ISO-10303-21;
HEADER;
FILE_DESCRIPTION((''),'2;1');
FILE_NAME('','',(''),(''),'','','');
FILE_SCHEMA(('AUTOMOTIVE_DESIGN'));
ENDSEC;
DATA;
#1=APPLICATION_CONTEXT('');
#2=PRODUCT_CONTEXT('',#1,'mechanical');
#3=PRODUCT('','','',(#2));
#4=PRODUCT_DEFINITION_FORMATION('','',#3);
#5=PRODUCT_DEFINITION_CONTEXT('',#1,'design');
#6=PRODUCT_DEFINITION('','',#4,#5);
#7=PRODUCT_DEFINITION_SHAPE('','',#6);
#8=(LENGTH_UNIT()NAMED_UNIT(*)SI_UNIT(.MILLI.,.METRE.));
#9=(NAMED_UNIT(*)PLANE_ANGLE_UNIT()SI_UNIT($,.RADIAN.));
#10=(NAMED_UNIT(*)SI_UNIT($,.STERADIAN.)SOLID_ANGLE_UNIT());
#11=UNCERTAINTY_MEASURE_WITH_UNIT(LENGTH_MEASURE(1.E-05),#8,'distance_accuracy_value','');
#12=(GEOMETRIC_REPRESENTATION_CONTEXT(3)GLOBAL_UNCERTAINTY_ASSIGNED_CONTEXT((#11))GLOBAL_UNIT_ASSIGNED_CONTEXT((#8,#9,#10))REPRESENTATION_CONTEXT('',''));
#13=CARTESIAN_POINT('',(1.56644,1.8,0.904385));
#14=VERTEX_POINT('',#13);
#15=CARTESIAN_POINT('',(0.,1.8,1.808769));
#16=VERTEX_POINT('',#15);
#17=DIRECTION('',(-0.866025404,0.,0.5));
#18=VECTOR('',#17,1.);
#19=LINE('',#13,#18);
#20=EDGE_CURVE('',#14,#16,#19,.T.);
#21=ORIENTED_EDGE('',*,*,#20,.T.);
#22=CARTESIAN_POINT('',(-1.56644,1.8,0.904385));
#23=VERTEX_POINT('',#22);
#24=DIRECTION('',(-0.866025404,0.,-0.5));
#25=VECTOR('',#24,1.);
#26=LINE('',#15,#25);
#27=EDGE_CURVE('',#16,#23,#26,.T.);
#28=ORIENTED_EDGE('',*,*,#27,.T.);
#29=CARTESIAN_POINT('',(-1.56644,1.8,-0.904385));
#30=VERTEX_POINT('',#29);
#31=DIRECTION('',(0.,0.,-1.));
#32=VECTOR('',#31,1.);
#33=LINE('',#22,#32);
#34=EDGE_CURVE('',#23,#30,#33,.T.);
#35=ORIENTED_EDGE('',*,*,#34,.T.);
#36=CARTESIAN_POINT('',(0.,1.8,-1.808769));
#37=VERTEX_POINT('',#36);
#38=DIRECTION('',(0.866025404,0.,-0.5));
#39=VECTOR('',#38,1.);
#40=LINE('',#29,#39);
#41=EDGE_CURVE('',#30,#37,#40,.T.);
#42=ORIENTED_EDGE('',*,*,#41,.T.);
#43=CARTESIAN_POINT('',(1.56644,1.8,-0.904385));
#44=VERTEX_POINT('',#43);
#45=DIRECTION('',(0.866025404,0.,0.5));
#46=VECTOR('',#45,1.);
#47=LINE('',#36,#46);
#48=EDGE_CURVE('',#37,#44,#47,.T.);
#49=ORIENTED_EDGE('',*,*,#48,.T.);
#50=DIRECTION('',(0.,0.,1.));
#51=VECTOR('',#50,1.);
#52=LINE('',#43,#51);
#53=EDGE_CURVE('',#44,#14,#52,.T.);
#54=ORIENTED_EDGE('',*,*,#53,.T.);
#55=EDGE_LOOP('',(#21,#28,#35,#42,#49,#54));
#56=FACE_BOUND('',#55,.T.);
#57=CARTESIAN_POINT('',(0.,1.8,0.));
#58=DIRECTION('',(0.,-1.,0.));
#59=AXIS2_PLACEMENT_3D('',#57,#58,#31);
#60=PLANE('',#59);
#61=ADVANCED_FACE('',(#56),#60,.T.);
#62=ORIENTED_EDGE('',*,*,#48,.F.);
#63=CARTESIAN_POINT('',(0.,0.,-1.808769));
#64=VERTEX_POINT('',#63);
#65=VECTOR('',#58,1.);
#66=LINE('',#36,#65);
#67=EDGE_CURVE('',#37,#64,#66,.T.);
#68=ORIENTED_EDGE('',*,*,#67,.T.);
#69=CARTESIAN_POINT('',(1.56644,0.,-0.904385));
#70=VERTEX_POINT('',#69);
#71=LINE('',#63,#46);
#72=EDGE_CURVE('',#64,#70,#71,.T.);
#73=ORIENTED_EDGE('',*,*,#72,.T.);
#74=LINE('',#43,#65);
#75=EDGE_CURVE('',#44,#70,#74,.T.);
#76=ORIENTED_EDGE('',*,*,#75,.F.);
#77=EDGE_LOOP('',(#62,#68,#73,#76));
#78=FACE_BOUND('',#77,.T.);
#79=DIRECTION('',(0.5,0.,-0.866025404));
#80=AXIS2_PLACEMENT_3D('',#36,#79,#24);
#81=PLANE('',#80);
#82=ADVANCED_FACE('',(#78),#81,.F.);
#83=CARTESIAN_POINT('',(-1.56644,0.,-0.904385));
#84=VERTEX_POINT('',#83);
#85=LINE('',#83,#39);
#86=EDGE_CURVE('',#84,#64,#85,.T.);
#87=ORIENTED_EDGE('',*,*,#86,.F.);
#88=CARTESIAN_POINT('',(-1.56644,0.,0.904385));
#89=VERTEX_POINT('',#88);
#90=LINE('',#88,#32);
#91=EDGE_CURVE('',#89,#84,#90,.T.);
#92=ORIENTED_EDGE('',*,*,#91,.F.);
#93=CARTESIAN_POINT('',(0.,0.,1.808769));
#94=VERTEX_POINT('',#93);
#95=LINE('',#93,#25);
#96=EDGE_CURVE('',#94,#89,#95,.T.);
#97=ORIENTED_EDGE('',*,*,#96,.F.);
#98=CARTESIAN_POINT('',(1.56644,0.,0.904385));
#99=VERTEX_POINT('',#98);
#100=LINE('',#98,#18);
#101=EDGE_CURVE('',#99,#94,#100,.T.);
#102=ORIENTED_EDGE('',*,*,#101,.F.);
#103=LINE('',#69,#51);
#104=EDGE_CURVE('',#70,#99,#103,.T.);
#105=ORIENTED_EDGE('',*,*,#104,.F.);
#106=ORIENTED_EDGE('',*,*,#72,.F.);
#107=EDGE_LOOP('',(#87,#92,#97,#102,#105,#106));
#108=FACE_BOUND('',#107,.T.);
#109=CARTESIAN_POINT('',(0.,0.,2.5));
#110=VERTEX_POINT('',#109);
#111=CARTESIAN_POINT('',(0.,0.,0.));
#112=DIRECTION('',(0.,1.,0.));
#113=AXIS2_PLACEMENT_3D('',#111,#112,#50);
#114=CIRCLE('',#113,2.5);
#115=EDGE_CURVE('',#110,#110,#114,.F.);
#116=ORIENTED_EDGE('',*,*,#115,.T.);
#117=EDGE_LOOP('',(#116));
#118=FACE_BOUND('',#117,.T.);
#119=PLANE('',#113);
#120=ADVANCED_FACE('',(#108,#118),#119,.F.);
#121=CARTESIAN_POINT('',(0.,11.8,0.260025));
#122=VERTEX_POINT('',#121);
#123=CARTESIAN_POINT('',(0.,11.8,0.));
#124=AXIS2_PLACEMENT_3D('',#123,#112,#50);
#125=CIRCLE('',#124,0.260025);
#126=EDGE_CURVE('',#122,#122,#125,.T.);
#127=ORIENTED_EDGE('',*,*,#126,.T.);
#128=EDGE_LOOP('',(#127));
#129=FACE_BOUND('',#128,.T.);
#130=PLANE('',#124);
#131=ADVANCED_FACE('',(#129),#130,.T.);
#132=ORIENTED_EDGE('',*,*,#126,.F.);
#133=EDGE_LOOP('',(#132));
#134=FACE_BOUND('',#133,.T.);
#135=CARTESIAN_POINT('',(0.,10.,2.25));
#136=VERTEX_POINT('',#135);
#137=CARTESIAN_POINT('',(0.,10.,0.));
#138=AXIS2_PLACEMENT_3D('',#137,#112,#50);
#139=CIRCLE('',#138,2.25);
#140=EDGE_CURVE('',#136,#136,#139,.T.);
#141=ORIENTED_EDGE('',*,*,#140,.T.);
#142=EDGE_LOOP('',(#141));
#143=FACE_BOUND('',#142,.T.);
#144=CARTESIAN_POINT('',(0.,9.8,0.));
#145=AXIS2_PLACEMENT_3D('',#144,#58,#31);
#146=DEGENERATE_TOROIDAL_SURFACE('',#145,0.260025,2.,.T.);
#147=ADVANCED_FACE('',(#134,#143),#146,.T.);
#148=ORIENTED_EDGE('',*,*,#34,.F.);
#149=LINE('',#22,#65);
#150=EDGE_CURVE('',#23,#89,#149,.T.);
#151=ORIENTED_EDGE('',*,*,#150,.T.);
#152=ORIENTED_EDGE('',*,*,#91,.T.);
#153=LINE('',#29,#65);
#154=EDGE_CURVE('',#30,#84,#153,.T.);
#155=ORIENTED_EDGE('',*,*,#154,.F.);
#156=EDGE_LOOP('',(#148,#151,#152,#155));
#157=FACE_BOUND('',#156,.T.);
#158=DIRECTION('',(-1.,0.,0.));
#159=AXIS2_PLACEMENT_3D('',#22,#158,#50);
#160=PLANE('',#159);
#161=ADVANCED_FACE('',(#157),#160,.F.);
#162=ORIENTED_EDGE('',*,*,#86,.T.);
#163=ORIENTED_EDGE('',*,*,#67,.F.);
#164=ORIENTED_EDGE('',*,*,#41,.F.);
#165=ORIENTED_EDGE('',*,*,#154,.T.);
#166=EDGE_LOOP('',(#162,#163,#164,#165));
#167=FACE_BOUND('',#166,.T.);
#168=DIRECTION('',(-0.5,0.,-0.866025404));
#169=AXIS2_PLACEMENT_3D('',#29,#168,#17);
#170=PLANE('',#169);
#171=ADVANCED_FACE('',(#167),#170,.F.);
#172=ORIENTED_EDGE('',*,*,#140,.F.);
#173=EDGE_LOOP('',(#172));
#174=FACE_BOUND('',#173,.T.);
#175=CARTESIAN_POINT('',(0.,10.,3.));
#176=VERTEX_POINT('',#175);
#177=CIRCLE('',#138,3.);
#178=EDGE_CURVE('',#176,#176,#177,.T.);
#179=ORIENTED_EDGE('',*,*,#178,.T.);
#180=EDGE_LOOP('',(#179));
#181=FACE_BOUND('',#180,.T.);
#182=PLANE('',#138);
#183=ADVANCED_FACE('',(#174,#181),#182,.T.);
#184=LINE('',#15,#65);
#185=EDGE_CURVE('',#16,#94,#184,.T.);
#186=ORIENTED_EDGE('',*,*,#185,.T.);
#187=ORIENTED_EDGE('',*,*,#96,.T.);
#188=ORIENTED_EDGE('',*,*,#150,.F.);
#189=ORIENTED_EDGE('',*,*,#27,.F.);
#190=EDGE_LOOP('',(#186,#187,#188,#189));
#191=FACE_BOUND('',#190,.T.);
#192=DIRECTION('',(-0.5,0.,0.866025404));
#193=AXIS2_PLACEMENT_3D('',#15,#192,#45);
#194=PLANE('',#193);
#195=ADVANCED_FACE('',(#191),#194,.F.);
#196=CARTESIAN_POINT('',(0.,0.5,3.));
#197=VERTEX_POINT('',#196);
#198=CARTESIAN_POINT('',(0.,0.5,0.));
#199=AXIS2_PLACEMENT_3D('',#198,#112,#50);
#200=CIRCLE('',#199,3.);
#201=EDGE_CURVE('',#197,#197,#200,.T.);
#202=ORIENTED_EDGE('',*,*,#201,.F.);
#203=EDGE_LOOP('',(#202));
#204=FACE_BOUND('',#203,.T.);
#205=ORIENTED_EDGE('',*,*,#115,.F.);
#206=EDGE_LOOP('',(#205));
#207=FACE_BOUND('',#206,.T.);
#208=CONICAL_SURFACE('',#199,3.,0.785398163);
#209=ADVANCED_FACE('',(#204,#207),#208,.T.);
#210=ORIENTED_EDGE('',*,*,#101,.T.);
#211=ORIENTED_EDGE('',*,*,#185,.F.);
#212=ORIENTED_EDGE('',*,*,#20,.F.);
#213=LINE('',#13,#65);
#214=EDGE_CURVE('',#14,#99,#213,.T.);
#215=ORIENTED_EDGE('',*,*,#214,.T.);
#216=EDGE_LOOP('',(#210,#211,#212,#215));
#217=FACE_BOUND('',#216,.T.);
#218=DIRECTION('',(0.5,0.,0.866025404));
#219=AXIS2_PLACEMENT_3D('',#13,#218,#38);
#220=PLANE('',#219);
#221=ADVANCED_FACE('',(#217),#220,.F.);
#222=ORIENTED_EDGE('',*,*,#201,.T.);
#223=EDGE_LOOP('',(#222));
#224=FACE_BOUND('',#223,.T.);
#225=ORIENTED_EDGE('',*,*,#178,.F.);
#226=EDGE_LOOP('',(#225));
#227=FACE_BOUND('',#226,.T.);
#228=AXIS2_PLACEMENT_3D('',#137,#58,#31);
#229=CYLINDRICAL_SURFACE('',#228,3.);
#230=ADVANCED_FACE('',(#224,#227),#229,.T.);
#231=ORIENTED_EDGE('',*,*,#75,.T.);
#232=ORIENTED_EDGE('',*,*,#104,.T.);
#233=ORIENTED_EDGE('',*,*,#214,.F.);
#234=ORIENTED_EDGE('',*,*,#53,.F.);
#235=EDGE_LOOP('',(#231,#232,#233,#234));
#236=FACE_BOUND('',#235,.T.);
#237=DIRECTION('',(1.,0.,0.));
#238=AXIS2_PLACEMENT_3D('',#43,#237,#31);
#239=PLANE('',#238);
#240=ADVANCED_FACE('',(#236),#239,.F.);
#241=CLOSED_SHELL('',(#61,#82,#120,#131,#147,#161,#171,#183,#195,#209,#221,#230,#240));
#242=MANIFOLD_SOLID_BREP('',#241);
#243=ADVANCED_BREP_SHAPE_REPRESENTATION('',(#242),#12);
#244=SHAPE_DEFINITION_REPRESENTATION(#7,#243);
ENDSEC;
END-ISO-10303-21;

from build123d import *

# Parameters (mm, degrees)
SKETCH_1_R          = 3
EXTRUDE_1_DEPTH     = 10
SKETCH_2_R          = 2.25
EXTRUDE_2_DEPTH     = 1.8
FILLET_2_R          = 2
CHAMFER_1_SIZE      = 0.5
CUT_EXTRUDE_1_DEPTH = 1.8


with BuildPart() as part:
    # 草图1 → 凸台-拉伸1 (new body)
    with BuildSketch(Plane(origin=(0, 0, 0), x_dir=(1, 0, 0), z_dir=(0, 1, 0))):
        with Locations(Location((0, 0, 0), (0, 0, 270))):
            Circle(SKETCH_1_R)
    extrude(amount=EXTRUDE_1_DEPTH)

    # 草图2 → 凸台-拉伸2 (add)
    with BuildSketch(Plane(origin=(0, 10, 0), x_dir=(1, 0, 0), z_dir=(0, 1, 0))):
        with Locations(Location((0, 0, 0), (0, 0, 270))):
            Circle(SKETCH_2_R)
    extrude(amount=EXTRUDE_2_DEPTH)

    # 圆角2
    # the kernel refuses this fillet: 2 mm, written as the material it takes off along each edge
    with BuildSketch(Plane(origin=(0, 11.8, 0), x_dir=(0, 0, 1), z_dir=(-1, 0, 0))) as fillet_2_piece_1:
        with BuildLine():
            CenterArc((0.260025126, -2), FILLET_2_R, 5.739170477, 84.260829523)
            Line((0.260025126, 0), (0.260025126, 0.04))
            Line((0.260025126, 0.04), (2.25, 0.04))
            Line((2.25, 0.04), (2.29, 0))
            ThreePointArc((2.29, 0), (2.29, -0.9), (2.289799497, -1.796))
            Line((2.289799497, -1.796), (2.25, -1.8))
        make_face()
    revolve(axis=Axis((0, 11.8, 0), (0, 1, 0)), mode=Mode.SUBTRACT)

    # 倒角1
    chamfer_1_edges = [part.edges().sort_by_distance(p)[0] for p in [
        (0, 0, -3),
    ]]
    chamfer(chamfer_1_edges, length=CHAMFER_1_SIZE)

    # 草图3 → 切除-拉伸1 (cut)
    with BuildSketch(Plane.XZ):
        Polygon((0, 1.808769012), (-1.566439914, 0.904384506), (-1.566439914, -0.904384506), (0, -1.808769012), (1.566439914, -0.904384506), (1.566439914, 0.904384506), align=None)
    extrude(amount=-CUT_EXTRUDE_1_DEPTH, mode=Mode.SUBTRACT)


solid = part.part
